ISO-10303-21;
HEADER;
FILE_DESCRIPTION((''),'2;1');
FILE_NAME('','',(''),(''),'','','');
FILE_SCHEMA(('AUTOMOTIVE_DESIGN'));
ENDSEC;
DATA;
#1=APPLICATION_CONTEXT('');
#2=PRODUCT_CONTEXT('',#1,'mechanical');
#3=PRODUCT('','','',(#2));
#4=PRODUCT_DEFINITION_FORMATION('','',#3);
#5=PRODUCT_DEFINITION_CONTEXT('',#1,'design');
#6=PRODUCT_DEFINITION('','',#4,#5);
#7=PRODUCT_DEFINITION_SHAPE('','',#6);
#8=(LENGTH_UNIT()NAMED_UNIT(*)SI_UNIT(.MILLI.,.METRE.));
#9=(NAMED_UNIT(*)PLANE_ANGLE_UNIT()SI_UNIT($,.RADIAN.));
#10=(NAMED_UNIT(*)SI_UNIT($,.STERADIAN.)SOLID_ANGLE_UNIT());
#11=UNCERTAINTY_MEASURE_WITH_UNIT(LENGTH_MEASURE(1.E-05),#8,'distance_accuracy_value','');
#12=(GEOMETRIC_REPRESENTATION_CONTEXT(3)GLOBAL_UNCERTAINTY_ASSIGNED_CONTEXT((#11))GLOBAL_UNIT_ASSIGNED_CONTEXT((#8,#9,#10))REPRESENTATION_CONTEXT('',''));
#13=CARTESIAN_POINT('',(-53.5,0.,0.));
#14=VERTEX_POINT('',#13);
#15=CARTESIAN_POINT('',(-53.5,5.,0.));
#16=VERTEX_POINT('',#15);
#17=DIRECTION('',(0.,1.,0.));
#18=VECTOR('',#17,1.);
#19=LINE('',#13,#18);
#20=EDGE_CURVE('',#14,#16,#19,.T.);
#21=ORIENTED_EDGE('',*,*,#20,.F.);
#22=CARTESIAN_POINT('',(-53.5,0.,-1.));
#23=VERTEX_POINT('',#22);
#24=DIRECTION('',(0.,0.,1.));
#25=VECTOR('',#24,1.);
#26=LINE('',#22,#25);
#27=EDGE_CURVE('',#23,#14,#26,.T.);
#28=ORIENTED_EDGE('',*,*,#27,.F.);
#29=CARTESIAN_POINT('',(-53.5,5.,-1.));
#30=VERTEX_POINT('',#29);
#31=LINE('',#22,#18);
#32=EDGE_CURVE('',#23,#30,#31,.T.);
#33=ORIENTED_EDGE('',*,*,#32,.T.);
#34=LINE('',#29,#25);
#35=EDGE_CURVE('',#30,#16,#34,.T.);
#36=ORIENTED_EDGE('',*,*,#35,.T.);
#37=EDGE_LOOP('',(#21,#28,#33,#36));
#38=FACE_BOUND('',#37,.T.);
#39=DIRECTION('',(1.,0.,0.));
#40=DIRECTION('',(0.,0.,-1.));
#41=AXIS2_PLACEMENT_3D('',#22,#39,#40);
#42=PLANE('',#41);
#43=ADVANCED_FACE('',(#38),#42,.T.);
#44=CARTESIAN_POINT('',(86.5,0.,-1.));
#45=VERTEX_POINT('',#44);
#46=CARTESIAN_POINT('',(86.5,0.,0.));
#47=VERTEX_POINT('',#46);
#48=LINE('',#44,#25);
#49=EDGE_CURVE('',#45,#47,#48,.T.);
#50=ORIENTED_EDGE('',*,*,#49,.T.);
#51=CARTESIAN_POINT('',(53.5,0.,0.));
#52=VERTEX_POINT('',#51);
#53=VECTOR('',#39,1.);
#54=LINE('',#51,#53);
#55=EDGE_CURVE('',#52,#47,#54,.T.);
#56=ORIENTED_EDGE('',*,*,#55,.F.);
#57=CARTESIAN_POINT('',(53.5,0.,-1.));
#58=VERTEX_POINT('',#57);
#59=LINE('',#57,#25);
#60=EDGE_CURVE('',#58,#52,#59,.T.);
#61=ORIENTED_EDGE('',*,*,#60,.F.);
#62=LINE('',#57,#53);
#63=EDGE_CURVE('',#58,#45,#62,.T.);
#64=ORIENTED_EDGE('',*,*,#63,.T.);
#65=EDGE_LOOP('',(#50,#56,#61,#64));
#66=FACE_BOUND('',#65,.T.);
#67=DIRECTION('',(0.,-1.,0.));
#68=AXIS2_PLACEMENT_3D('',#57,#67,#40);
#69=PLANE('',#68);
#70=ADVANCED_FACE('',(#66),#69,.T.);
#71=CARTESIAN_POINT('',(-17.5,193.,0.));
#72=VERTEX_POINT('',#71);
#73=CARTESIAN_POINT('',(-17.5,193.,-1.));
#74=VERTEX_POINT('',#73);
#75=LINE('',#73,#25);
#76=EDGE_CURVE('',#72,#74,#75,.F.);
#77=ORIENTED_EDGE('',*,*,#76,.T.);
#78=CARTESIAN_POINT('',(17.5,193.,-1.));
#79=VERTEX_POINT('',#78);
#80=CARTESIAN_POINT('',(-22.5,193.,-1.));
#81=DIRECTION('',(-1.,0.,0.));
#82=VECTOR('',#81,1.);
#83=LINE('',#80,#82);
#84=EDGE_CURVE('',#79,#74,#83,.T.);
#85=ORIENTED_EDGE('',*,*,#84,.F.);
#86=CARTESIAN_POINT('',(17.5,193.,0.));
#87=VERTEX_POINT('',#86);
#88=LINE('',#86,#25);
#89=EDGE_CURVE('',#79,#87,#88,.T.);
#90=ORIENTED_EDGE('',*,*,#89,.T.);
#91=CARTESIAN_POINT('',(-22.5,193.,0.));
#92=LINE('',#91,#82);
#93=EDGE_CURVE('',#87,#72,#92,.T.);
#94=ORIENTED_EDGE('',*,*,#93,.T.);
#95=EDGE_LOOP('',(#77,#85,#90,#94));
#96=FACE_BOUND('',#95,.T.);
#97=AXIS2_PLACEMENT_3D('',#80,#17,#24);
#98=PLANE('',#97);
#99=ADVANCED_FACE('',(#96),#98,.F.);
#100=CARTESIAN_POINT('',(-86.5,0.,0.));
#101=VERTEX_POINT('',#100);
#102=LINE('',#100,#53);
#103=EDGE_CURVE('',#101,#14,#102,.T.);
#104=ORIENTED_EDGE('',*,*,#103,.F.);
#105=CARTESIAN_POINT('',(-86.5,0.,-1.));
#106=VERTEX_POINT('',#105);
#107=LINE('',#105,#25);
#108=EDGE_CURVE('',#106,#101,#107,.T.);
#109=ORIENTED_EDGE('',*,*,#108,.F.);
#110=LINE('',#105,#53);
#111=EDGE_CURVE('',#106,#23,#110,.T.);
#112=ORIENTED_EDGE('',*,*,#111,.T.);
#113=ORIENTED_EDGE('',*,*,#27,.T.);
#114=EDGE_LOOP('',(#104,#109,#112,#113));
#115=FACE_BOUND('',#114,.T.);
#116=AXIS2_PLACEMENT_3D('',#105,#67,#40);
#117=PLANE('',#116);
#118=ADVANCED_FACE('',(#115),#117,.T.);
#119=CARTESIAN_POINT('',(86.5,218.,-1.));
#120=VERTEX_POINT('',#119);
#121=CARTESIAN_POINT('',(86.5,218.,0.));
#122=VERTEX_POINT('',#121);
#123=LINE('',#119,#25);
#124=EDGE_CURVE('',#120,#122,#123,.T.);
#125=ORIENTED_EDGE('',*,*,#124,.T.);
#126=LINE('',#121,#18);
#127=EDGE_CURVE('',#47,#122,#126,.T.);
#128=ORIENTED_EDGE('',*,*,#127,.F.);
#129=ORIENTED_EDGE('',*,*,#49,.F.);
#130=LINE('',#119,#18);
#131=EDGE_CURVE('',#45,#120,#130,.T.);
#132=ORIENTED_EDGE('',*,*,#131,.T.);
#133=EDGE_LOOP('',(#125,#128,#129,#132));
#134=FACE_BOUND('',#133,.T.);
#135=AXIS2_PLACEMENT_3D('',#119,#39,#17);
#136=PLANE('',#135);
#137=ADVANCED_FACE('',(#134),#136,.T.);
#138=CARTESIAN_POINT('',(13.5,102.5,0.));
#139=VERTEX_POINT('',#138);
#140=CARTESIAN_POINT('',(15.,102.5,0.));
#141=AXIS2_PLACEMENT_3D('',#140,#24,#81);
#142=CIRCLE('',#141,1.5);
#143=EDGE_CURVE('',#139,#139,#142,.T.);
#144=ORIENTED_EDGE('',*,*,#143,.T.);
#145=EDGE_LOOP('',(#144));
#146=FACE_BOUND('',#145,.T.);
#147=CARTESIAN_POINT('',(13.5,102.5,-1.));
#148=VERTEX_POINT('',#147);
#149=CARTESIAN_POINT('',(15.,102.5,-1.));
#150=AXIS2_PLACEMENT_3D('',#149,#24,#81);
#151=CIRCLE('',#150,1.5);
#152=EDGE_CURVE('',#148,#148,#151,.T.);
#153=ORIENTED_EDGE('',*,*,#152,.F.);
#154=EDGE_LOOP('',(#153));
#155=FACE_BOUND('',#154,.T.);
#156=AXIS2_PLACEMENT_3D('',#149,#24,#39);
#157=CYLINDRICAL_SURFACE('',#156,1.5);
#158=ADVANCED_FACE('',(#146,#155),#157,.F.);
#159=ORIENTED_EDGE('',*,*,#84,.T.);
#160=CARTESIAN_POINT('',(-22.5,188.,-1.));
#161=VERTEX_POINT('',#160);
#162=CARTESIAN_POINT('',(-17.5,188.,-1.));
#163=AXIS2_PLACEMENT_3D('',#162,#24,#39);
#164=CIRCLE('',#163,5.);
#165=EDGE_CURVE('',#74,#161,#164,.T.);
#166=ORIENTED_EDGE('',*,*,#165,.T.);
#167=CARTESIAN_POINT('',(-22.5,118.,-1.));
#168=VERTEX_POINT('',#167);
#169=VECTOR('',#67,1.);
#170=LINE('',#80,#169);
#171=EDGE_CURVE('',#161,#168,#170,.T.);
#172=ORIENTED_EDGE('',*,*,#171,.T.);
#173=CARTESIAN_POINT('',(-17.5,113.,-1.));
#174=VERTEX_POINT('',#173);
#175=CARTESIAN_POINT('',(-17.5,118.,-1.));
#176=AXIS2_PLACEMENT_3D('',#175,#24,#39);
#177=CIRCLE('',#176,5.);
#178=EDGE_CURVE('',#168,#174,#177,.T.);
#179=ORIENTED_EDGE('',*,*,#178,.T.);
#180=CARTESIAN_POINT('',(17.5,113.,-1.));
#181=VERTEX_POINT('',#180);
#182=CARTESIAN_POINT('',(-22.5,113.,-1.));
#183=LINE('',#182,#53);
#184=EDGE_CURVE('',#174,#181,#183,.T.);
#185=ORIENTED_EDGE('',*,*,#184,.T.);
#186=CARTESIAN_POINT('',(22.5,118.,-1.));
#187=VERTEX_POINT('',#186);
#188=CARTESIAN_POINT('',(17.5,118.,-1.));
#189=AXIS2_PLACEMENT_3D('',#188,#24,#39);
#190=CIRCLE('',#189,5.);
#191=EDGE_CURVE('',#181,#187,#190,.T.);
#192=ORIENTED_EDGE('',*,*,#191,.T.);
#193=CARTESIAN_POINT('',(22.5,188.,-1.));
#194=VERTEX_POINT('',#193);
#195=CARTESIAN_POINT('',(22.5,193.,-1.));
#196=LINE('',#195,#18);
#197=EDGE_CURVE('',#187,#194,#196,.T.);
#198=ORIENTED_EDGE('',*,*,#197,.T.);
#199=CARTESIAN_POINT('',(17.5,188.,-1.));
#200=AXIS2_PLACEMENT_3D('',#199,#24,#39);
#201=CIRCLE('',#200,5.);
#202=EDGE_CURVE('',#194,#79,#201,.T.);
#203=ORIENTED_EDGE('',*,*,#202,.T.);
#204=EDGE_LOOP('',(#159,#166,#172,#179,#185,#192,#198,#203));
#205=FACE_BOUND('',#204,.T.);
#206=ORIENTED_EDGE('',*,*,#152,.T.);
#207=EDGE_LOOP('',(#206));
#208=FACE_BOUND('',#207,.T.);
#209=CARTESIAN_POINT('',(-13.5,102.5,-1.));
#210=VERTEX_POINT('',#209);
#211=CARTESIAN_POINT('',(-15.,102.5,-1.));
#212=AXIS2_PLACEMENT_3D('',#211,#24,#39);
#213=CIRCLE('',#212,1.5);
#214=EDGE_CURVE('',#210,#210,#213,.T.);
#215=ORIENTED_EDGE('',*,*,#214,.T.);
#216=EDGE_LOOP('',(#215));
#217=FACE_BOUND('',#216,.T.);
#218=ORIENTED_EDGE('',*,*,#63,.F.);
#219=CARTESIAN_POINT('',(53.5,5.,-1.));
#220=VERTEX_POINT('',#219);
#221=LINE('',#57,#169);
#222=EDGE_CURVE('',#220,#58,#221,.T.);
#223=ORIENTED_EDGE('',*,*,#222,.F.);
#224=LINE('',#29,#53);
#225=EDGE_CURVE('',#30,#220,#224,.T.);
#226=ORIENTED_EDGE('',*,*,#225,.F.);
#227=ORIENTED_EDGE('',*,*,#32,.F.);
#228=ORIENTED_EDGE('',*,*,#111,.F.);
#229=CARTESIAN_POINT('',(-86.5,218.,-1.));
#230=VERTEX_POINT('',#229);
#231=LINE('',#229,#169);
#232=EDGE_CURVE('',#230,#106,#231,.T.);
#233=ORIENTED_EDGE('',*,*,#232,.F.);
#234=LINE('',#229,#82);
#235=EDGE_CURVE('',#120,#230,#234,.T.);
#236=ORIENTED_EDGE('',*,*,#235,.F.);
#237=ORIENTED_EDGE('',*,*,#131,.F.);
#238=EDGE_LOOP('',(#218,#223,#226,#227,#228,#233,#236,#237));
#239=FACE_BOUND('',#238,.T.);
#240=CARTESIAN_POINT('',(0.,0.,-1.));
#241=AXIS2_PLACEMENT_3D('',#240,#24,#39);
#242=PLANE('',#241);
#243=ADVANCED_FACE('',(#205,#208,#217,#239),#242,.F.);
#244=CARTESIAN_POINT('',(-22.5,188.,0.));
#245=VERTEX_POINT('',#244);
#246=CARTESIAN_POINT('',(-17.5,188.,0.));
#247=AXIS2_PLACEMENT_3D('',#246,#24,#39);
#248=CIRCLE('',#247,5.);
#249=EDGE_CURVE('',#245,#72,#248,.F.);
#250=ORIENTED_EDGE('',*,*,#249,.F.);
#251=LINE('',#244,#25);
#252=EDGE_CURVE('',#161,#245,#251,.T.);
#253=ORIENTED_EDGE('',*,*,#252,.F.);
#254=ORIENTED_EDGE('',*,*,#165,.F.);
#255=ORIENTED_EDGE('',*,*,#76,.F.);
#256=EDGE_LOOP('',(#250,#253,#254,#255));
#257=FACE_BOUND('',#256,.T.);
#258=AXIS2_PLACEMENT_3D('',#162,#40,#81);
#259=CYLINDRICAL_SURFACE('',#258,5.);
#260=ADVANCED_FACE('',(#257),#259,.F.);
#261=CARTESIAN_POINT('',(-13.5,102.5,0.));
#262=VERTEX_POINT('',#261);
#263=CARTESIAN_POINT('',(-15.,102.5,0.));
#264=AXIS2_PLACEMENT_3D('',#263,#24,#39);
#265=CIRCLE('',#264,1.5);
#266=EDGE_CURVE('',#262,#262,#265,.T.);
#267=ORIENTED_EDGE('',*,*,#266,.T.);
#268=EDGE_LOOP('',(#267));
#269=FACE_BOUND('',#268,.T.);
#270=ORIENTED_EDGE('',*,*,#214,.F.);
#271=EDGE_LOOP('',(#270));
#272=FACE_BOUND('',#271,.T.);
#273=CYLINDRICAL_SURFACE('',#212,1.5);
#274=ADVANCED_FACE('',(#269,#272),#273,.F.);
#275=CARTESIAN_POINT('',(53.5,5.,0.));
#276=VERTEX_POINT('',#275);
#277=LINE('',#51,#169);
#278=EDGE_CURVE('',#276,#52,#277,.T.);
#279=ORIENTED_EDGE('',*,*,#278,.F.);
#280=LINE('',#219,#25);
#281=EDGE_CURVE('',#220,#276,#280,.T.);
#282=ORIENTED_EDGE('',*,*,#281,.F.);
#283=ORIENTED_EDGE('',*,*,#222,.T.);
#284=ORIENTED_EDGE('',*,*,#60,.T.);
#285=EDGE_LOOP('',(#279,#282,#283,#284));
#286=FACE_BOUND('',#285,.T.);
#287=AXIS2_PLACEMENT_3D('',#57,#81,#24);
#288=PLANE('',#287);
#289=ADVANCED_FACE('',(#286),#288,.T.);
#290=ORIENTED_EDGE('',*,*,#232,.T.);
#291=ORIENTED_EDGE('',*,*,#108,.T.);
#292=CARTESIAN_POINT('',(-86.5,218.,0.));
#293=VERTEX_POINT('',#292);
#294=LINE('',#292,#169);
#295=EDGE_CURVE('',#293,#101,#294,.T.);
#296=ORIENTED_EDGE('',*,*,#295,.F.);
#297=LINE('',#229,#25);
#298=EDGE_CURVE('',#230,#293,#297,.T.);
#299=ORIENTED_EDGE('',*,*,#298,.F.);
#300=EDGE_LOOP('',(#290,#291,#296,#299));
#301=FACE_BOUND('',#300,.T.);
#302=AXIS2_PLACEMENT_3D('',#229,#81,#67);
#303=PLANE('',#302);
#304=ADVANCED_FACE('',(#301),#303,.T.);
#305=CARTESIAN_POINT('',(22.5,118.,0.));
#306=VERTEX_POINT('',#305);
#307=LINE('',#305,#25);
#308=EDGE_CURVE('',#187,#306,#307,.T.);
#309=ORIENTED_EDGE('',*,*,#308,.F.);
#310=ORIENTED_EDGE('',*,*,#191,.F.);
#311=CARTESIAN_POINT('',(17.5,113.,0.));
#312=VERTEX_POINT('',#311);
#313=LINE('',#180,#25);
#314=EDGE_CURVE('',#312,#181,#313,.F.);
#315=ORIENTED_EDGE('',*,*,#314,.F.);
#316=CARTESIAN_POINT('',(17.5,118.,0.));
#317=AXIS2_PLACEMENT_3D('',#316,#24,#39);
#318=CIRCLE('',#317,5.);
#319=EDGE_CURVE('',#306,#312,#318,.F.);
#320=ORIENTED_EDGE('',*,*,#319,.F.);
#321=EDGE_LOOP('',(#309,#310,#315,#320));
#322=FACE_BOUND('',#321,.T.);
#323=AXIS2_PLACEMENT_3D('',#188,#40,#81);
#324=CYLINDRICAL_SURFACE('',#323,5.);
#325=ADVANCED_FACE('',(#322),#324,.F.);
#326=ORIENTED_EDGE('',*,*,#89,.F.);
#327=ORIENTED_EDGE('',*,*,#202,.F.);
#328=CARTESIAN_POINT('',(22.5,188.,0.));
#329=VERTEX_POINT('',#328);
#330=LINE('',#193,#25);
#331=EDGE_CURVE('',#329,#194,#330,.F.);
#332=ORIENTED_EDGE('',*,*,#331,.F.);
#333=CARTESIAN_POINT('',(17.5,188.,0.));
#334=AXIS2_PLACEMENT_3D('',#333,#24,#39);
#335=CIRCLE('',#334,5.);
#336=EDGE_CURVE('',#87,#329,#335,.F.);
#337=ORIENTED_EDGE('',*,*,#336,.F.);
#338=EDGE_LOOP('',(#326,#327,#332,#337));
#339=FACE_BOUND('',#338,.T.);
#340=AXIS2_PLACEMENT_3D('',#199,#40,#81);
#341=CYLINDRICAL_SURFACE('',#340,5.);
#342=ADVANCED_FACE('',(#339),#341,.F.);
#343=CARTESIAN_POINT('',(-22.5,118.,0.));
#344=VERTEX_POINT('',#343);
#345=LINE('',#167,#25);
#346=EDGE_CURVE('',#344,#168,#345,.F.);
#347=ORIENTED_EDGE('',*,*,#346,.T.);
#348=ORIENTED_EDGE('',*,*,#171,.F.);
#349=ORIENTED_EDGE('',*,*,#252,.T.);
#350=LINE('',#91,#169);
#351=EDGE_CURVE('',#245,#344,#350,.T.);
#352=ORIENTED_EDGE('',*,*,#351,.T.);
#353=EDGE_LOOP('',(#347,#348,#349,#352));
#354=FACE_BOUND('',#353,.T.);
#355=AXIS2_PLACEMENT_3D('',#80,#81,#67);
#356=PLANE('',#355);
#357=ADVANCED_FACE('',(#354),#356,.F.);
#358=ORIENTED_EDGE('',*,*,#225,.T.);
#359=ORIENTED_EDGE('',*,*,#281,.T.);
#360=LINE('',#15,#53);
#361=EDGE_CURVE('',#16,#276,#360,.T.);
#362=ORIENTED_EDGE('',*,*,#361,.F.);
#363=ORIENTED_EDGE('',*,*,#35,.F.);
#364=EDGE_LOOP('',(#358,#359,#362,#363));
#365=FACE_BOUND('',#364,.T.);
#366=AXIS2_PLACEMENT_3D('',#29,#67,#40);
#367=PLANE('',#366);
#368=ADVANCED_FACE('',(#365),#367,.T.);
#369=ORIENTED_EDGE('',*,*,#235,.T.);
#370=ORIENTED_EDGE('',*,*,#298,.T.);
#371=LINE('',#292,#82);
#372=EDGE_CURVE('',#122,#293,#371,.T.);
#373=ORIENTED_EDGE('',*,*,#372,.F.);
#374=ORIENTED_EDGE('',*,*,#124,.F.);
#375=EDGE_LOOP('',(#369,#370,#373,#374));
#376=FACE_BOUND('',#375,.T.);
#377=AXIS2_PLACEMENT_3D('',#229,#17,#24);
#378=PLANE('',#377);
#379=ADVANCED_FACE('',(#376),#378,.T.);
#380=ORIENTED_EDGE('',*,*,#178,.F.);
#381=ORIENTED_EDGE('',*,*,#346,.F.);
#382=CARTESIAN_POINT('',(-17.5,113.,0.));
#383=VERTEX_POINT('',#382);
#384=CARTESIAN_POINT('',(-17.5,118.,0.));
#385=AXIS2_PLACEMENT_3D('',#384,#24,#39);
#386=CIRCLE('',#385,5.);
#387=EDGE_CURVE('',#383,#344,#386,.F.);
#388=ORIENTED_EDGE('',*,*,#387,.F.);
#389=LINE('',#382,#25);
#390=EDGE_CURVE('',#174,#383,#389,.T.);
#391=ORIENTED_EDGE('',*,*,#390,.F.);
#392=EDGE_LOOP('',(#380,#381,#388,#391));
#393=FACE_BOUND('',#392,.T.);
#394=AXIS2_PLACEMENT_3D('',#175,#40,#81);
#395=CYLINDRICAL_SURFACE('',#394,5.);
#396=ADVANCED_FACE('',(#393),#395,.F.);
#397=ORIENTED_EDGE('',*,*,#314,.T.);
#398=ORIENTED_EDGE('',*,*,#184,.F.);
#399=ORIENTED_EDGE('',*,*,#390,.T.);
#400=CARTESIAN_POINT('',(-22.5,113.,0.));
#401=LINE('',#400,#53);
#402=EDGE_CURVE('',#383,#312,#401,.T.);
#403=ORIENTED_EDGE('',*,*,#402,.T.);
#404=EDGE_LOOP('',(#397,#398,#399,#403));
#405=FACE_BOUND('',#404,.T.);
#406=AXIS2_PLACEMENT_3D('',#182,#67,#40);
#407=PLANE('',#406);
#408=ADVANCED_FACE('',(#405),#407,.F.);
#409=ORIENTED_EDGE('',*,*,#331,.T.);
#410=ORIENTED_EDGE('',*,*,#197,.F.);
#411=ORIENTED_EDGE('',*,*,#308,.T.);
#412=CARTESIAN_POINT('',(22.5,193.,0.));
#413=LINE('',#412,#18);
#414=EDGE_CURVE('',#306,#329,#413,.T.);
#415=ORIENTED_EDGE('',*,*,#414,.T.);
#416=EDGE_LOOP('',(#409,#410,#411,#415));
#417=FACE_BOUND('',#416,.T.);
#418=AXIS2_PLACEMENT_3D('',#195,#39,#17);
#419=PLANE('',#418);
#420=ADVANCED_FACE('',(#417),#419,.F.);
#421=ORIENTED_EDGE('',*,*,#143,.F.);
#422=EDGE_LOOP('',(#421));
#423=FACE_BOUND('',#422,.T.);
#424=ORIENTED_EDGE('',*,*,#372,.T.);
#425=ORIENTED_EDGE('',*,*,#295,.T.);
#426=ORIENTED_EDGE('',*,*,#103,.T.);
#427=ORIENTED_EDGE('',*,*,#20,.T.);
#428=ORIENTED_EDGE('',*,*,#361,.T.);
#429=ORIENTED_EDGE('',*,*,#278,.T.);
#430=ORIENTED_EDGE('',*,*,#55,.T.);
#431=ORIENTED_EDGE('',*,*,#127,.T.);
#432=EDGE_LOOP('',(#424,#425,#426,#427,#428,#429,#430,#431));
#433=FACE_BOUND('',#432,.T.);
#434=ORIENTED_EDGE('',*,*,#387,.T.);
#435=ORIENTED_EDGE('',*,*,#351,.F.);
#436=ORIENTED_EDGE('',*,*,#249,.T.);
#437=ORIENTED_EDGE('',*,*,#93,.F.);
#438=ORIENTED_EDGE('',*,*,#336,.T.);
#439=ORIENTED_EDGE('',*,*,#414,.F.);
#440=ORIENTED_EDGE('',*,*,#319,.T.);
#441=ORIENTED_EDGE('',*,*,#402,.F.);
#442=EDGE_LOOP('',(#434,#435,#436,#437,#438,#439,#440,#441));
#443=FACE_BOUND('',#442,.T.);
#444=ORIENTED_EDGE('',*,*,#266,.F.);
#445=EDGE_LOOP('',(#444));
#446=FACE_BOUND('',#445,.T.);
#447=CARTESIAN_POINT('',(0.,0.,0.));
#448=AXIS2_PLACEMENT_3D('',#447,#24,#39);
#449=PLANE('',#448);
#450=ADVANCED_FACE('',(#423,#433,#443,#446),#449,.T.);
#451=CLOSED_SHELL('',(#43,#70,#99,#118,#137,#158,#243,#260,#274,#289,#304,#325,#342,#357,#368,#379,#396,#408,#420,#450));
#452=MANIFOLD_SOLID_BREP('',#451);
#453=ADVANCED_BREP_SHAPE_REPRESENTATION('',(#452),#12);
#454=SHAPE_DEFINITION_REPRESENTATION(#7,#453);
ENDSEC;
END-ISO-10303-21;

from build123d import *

# Parameters (mm, degrees)
T_LE_DE_BASE_PLI_E1_DEPTH = 1
ESQUISSE2_R               = 1.5
ESQUISSE2_W               = 45
ESQUISSE2_H               = 80
ENL_V_MAT_EXTRU_1_DEPTH   = 1
CONG_1_R                  = 5


# Sheet-metal steps are written as plain solids
with BuildPart() as part:
    # Esquisse1 → Tôle de base pliée1 (new body)
    with BuildSketch(Plane.XY):
        Polygon((53.5, 0), (86.5, 0), (86.5, 218), (-86.5, 218), (-86.5, 0), (-53.5, 0), (-53.5, 5), (53.5, 5), align=None)
    extrude(amount=-T_LE_DE_BASE_PLI_E1_DEPTH)

    # Esquisse2 → Enlèv. mat.-Extru.1 (cut)
    with BuildSketch(Plane.XY):
        with Locations((-15, 102.5)):
            Circle(ESQUISSE2_R)
        with Locations(Location((15, 102.5, 0), (0, 0, 180))):
            Circle(ESQUISSE2_R)
        with Locations((0, 153)):
            Rectangle(ESQUISSE2_W, ESQUISSE2_H)
    extrude(amount=-ENL_V_MAT_EXTRU_1_DEPTH, mode=Mode.SUBTRACT)

    # Congé1
    cong_1_edges = [part.edges().sort_by_distance(p)[0] for p in [
        (-22.5, 113, -0.5),
        (-22.5, 193, -0.5),
        (22.5, 193, -0.5),
        (22.5, 113, -0.5),
    ]]
    fillet(cong_1_edges, radius=CONG_1_R)


solid = part.part
